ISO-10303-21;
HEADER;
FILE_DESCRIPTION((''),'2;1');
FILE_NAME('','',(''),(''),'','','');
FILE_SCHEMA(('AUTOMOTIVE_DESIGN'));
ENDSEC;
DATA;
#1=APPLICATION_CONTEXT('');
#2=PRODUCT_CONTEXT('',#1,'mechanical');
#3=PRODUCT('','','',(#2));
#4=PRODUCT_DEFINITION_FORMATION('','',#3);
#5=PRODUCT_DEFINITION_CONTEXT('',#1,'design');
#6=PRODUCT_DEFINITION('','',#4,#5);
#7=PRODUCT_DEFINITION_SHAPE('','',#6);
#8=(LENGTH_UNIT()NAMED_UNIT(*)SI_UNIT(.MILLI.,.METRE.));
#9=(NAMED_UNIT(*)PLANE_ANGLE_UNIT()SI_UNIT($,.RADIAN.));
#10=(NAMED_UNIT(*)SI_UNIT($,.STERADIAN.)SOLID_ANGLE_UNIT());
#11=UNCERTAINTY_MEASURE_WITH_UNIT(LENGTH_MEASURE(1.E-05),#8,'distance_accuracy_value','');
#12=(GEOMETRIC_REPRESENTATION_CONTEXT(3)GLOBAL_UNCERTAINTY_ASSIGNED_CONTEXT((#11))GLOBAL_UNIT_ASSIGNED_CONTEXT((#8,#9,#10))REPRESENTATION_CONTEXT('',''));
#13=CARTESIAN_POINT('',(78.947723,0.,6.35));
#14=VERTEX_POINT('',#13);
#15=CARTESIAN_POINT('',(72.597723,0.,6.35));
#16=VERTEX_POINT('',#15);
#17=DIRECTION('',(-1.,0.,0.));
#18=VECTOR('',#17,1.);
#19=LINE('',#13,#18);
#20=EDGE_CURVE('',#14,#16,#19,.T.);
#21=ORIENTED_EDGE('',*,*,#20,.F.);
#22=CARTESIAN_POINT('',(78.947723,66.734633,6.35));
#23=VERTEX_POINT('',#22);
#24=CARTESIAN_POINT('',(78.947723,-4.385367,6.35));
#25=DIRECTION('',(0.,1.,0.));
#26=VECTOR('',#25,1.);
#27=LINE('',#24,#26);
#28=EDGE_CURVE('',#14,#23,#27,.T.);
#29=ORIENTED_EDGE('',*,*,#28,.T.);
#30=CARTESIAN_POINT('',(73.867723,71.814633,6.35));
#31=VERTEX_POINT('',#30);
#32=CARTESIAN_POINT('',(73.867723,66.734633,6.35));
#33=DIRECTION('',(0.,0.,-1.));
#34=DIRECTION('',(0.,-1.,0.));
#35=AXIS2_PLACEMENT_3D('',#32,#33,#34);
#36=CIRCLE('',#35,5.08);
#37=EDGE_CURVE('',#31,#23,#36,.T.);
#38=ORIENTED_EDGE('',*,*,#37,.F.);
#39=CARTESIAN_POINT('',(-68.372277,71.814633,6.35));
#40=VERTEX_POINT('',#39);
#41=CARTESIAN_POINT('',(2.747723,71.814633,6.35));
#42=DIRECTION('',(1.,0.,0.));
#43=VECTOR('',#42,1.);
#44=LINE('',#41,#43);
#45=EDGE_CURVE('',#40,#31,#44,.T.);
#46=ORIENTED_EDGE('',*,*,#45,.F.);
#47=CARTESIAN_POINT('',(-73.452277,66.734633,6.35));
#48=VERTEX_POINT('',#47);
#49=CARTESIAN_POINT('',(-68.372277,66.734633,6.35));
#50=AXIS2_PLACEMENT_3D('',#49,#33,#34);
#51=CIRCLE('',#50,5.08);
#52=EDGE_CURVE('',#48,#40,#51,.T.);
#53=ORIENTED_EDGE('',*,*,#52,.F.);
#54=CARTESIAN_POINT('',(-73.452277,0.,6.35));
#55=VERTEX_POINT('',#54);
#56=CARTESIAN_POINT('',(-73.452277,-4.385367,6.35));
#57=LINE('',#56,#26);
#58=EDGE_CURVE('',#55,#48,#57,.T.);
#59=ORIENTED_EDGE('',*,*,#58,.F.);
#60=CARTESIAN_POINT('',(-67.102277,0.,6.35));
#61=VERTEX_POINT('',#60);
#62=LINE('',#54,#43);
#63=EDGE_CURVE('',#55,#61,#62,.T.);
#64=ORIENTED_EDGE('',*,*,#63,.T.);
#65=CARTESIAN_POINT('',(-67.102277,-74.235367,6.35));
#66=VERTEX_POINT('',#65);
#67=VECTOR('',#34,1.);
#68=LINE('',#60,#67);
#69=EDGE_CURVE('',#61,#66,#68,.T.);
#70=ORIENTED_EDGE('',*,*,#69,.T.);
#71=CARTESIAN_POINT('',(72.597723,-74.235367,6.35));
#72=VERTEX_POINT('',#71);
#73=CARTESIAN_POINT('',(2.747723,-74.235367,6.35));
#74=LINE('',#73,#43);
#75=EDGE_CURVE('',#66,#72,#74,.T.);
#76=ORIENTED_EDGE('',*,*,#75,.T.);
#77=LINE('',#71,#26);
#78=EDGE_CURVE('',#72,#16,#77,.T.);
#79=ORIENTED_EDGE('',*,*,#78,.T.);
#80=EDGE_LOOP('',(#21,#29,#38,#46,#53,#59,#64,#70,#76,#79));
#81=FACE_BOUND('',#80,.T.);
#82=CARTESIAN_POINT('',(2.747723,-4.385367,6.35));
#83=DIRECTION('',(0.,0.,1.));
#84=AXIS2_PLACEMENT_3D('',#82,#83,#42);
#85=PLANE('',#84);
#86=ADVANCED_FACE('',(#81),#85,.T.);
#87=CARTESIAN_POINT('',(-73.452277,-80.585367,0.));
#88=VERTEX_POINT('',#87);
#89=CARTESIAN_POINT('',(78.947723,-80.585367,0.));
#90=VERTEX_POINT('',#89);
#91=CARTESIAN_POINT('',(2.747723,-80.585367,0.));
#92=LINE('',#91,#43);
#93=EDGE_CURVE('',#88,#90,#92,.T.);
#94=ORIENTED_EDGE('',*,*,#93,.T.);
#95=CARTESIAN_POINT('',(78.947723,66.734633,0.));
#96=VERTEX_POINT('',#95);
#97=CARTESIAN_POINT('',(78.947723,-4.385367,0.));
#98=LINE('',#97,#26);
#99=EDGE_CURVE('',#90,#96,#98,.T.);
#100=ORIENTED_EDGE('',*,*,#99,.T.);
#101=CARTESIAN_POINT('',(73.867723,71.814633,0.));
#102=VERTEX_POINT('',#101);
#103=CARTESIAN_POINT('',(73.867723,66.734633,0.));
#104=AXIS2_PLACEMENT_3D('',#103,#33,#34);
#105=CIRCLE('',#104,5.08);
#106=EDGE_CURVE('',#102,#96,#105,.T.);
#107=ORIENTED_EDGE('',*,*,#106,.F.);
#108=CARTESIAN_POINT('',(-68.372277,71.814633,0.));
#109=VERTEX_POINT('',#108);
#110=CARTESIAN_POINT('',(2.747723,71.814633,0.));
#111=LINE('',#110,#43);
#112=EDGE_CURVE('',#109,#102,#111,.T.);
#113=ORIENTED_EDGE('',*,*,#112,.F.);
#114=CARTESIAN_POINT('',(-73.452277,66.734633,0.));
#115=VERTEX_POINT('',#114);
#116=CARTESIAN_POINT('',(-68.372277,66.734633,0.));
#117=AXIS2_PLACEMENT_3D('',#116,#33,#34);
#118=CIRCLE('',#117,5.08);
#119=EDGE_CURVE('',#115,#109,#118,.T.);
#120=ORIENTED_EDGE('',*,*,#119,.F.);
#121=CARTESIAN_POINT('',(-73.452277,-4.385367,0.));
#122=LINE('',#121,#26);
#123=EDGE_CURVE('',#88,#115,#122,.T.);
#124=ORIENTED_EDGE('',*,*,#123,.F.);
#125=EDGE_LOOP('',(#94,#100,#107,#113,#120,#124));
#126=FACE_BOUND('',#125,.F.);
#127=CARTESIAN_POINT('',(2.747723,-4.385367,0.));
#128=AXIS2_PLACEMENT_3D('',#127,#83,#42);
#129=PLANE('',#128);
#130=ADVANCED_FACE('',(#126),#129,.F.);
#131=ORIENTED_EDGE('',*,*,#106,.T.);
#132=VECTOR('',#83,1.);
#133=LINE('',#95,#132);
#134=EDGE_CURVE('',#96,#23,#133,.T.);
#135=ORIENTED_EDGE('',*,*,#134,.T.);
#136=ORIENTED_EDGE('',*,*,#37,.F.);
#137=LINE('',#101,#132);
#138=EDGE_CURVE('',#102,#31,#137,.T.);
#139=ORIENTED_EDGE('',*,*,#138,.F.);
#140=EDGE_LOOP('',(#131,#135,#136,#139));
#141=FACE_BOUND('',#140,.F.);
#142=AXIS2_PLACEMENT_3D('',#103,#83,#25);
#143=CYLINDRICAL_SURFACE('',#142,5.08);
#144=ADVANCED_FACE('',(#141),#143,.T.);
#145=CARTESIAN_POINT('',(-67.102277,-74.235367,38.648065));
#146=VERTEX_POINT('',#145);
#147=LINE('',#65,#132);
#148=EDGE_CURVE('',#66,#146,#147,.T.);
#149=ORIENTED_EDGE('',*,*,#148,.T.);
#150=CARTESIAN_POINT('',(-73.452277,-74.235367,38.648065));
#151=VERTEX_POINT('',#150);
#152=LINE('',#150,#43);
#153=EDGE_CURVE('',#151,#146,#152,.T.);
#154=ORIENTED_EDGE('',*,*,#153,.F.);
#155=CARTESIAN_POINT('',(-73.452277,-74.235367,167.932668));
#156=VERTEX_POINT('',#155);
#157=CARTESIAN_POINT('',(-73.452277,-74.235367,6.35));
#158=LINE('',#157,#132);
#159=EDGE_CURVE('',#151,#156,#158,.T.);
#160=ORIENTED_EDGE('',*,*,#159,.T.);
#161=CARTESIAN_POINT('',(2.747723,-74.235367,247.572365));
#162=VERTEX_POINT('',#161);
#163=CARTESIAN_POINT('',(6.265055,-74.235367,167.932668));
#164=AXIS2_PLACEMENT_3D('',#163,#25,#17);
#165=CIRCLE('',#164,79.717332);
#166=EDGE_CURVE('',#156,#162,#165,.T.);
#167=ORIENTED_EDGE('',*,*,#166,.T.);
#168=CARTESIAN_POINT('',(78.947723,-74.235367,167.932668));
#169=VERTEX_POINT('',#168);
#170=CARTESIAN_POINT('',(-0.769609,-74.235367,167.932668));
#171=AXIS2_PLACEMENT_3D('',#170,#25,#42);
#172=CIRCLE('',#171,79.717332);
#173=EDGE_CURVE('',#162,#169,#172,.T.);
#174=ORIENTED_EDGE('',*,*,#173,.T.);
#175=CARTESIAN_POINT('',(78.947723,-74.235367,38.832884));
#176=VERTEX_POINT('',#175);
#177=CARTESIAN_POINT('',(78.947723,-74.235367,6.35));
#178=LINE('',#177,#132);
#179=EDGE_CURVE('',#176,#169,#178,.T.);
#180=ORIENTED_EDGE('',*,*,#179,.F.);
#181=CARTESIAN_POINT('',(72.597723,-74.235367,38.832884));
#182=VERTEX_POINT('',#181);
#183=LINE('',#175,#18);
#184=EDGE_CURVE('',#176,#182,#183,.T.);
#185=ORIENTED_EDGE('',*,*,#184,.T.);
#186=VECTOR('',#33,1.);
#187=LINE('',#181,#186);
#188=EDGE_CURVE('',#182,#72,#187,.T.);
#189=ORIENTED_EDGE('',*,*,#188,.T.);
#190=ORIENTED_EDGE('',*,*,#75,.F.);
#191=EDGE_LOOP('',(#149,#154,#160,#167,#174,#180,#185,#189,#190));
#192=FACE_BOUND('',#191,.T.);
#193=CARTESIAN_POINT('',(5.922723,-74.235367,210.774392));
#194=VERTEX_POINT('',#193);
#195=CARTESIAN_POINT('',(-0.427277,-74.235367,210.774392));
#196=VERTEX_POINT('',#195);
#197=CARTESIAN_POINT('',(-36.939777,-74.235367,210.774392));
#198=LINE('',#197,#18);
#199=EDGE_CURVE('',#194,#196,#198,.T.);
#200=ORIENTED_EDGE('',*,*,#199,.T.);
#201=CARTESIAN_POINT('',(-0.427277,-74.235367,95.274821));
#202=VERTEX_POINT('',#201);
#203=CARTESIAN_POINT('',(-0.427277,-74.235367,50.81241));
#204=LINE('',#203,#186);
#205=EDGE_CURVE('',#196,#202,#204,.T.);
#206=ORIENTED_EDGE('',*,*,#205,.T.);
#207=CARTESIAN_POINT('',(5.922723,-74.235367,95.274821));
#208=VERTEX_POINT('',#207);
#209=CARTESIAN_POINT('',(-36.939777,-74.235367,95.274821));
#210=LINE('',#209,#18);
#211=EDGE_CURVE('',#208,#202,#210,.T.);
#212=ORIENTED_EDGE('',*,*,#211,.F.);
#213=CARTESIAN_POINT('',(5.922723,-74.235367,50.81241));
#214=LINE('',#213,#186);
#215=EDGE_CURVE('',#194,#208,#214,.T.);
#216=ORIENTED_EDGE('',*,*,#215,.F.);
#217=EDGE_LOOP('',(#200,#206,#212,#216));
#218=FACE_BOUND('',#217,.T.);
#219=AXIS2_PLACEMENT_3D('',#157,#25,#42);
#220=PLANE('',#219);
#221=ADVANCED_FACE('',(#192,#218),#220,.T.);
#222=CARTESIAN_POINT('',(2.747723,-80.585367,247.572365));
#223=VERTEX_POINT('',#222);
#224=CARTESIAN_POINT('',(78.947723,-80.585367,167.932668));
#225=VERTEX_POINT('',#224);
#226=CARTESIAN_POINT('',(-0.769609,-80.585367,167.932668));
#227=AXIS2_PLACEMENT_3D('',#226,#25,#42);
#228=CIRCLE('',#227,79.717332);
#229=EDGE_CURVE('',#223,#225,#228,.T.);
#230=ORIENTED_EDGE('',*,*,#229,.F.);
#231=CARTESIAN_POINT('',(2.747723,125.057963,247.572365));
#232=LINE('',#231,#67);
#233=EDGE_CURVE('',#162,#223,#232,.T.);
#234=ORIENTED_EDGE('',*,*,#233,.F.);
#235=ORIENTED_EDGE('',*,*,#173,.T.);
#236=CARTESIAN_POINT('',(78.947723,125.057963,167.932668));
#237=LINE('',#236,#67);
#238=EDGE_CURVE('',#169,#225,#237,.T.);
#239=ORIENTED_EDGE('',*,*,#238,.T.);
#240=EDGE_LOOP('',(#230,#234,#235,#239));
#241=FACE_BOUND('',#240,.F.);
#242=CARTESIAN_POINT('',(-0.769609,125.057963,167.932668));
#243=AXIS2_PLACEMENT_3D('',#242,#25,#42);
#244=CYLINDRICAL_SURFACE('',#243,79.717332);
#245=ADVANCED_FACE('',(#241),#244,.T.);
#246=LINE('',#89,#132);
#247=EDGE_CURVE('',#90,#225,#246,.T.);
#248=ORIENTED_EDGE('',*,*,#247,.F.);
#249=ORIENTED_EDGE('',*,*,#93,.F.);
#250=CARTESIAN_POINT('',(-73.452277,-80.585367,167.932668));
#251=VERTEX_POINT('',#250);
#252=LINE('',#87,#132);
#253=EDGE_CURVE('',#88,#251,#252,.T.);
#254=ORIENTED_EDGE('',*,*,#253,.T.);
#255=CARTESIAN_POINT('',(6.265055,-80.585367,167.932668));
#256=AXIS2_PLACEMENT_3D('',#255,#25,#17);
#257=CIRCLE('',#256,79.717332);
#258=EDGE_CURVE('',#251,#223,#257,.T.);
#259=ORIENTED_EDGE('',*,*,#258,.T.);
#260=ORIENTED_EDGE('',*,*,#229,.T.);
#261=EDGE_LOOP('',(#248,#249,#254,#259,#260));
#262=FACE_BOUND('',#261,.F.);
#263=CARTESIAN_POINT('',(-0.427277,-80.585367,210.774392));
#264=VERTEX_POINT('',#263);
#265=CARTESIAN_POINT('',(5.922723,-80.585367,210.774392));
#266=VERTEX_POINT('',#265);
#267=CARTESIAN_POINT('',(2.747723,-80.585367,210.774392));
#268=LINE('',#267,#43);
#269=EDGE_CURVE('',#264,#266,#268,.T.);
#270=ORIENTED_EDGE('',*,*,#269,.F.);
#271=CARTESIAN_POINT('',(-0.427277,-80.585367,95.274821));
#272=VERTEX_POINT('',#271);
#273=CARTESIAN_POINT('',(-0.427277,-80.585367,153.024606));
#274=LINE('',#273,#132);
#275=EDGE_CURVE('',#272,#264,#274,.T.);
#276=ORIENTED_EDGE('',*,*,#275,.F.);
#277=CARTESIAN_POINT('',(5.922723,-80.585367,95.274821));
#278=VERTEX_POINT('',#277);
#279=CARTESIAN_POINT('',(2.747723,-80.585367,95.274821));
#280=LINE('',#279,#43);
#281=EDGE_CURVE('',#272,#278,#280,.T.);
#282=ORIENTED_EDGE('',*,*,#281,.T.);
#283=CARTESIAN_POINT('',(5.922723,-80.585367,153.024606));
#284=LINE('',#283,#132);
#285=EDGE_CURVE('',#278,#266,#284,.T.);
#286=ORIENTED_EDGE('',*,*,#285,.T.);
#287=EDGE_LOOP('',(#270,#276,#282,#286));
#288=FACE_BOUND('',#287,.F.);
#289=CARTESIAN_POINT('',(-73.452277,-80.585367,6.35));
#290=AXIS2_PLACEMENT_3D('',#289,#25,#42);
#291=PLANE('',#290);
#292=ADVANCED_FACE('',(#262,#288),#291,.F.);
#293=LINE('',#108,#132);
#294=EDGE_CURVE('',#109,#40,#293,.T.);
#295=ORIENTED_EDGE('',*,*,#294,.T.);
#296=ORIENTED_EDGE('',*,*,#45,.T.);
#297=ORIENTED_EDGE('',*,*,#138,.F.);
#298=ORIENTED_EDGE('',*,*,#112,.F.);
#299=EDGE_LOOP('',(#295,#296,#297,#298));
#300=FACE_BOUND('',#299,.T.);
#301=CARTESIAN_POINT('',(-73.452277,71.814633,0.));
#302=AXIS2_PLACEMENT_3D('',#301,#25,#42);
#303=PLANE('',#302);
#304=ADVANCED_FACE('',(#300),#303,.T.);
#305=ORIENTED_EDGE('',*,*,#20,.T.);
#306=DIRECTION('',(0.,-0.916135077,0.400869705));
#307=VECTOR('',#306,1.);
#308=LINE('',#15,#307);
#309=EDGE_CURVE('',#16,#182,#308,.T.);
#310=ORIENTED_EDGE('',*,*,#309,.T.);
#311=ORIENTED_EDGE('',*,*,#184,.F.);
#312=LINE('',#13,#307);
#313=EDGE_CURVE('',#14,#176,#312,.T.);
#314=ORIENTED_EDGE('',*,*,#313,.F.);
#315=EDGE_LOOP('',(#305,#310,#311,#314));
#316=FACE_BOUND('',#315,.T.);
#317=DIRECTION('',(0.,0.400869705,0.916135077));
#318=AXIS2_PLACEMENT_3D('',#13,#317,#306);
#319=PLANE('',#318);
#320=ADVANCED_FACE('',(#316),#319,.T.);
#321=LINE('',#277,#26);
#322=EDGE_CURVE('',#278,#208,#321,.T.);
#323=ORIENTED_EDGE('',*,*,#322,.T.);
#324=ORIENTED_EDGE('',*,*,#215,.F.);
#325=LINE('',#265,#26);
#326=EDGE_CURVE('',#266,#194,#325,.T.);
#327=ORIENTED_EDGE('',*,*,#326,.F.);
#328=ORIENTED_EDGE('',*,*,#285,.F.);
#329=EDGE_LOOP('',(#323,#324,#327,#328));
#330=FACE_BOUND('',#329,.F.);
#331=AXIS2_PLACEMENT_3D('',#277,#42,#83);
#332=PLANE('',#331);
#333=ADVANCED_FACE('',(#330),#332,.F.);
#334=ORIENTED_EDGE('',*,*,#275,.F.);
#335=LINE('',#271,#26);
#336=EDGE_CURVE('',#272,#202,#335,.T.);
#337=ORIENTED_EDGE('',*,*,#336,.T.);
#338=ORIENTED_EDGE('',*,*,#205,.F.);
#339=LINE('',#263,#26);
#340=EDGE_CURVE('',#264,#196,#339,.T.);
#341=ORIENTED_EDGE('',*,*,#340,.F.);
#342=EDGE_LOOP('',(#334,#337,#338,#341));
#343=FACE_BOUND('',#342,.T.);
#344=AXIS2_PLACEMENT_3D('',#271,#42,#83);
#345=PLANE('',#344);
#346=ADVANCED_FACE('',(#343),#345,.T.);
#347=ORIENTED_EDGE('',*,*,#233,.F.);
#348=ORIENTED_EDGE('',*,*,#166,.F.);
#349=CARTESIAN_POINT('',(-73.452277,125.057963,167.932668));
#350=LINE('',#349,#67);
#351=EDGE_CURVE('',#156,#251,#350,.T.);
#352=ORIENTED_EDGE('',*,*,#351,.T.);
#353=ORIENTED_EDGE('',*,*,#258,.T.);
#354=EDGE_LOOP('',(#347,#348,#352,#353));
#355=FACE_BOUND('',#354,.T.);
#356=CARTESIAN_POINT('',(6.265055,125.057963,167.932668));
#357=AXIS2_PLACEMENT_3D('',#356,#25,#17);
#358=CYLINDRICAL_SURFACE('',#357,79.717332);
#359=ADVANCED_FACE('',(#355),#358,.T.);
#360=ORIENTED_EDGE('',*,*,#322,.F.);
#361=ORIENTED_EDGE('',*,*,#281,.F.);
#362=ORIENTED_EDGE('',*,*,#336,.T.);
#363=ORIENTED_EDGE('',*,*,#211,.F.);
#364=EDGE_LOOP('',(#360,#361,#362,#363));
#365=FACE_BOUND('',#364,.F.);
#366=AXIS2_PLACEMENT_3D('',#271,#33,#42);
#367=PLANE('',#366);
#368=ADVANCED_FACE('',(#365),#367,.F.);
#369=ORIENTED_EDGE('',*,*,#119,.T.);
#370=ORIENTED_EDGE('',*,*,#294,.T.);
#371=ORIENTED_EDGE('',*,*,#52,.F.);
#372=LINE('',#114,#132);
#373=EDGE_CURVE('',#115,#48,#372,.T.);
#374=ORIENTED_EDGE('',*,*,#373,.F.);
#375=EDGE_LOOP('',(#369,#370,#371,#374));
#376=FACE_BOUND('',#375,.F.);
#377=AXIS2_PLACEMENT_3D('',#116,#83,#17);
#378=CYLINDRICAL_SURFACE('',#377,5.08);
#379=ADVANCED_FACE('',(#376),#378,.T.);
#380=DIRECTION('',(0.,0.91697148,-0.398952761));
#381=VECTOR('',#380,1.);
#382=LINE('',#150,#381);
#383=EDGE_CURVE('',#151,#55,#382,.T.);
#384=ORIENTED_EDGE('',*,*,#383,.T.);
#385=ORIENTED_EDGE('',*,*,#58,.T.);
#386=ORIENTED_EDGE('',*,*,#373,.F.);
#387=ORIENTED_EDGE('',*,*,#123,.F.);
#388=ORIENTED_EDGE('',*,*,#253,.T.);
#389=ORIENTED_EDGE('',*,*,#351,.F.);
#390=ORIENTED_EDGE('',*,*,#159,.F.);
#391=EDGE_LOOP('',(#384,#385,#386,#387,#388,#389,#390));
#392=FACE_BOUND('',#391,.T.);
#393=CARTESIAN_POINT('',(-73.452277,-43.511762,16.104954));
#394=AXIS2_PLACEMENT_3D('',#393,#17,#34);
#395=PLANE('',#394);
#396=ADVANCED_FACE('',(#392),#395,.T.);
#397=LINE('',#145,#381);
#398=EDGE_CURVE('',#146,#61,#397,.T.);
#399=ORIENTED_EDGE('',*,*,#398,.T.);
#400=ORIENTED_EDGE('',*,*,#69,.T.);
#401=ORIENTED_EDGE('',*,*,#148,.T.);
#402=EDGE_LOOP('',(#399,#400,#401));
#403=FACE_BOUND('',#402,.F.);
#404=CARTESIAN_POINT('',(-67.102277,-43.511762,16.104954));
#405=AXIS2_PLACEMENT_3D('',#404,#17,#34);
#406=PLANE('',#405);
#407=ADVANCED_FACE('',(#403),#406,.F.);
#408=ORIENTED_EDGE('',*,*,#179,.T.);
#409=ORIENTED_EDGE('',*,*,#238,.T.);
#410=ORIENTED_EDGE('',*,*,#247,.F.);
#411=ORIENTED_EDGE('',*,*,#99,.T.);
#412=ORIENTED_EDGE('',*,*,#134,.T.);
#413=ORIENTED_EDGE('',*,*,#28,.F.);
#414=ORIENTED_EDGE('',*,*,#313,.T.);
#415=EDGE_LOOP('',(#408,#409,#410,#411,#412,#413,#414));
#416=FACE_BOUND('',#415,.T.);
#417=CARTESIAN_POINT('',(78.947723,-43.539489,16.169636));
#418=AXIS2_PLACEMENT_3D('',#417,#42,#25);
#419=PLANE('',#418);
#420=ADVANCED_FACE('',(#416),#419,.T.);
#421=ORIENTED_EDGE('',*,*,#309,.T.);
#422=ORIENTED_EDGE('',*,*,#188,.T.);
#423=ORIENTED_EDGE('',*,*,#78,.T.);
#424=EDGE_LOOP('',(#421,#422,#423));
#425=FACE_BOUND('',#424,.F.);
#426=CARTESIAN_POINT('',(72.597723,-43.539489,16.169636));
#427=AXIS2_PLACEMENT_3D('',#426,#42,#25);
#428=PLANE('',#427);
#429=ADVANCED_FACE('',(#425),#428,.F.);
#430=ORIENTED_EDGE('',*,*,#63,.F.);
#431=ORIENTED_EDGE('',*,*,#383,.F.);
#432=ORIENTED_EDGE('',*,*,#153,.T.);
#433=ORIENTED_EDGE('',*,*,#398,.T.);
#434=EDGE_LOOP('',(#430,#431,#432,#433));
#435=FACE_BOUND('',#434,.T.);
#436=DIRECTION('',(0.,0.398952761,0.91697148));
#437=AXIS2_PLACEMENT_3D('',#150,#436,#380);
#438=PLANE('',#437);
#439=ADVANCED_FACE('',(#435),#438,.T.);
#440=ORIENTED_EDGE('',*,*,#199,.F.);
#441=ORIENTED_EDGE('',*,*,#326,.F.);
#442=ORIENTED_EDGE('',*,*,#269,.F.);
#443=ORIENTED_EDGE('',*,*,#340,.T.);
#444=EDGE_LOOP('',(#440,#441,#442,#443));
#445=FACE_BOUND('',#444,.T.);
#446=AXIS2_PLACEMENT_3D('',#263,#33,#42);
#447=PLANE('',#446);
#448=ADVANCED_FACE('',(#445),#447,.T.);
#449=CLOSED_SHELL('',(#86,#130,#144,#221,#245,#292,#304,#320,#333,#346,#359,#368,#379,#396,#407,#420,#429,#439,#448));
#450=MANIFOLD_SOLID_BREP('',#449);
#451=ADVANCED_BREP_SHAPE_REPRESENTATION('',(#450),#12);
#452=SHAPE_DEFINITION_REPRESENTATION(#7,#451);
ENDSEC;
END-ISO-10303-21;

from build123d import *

# Parameters (mm, degrees)
F0_W        = 152.4
F0_H        = 152.4
F1_DEPTH    = 6.35
F2_W        = 152.4
F2_H        = 6.35
F3_DEPTH    = 241.3
F5_T1_DEPTH = 404.9366591478
F6_W        = 6.35
F6_H        = 115.4995709658
F7_DEPTH    = 25.4
F8_R        = 5.08
F9_DEPTH    = 6.35
F11_DEPTH   = 6.35


# Not quite as in the source:
# - a fillet or chamfer that OpenCascade refuses, or shapes differently, is made with other operations: its cross-section is extruded or revolved along the edge and cut away or added


with BuildPart() as f1:
    # F0 (on Top) → F1 (new body)
    with BuildSketch(Plane.XY):
        with Locations((2.7477228088, -4.3853670359)):
            Rectangle(F0_W, F0_H)
    extrude(amount=F1_DEPTH)

    # F2 (on face) → F3 (join)
    with BuildSketch(Plane.XY.offset(6.35)):
        with Locations((2.7477228088, -77.4103670359)):
            Rectangle(F2_W, F2_H)
    extrude(amount=F3_DEPTH)

    # F5: fillet of radius 79.7173318296 on 2 edges, made by hand

    # F5_s2 → F5_t1 (cut)
    with BuildSketch(Plane.XZ.offset(-125.057962538)):
        with BuildLine():
            ThreePointArc((-73.4522771912, 167.9326681704), (-50.1036112765, 224.3013340852), (6.2650546383, 247.65))
            Line((6.2650546383, 247.65), (-73.4522771912, 247.65))
            Line((-73.4522771912, 247.65), (-73.4522771912, 167.9326681704))
        make_face()
        with BuildLine():
            ThreePointArc((78.9477228088, 167.9326681704), (55.599056894, 224.3013340852), (-0.7696090208, 247.65))
            Line((-0.7696090208, 247.65), (78.9477228088, 247.65))
            Line((78.9477228088, 247.65), (78.9477228088, 167.9326681704))
        make_face()
    extrude(amount=F5_T1_DEPTH, mode=Mode.SUBTRACT)

    # F6 (on face) → F7 (cut)
    with BuildSketch(Plane.XZ.offset(80.5853670359)):
        with Locations((2.7477228088, 153.0246064067)):
            Rectangle(F6_W, F6_H)
    extrude(amount=-F7_DEPTH, mode=Mode.SUBTRACT)

    # F8
    f8_edges = [f1.edges().sort_by_distance(p)[0] for p in [
        (78.947723, 71.814633, 3.175),
        (-73.452277, 71.814633, 3.175),
    ]]
    fillet(f8_edges, radius=F8_R)

    # F4 (on face) → F9 (join)
    with BuildSketch(Plane.YZ.offset(78.9477228088)):
        Polygon((-74.2353670359, 6.35), (0, 6.35), (-74.2353670359, 38.8328842819), align=None)
    extrude(amount=-F9_DEPTH)

    # F10 (on face) → F11 (join)
    with BuildSketch(Plane(origin=(-73.4522771912, 0, 0), x_dir=(0, -1, 0), z_dir=(-1, 0, 0))):
        Polygon((74.2353670359, 6.35), (74.2353670359, 38.6480651796), (0, 6.35), align=None)
    extrude(amount=-F11_DEPTH)


solid = f1.part
